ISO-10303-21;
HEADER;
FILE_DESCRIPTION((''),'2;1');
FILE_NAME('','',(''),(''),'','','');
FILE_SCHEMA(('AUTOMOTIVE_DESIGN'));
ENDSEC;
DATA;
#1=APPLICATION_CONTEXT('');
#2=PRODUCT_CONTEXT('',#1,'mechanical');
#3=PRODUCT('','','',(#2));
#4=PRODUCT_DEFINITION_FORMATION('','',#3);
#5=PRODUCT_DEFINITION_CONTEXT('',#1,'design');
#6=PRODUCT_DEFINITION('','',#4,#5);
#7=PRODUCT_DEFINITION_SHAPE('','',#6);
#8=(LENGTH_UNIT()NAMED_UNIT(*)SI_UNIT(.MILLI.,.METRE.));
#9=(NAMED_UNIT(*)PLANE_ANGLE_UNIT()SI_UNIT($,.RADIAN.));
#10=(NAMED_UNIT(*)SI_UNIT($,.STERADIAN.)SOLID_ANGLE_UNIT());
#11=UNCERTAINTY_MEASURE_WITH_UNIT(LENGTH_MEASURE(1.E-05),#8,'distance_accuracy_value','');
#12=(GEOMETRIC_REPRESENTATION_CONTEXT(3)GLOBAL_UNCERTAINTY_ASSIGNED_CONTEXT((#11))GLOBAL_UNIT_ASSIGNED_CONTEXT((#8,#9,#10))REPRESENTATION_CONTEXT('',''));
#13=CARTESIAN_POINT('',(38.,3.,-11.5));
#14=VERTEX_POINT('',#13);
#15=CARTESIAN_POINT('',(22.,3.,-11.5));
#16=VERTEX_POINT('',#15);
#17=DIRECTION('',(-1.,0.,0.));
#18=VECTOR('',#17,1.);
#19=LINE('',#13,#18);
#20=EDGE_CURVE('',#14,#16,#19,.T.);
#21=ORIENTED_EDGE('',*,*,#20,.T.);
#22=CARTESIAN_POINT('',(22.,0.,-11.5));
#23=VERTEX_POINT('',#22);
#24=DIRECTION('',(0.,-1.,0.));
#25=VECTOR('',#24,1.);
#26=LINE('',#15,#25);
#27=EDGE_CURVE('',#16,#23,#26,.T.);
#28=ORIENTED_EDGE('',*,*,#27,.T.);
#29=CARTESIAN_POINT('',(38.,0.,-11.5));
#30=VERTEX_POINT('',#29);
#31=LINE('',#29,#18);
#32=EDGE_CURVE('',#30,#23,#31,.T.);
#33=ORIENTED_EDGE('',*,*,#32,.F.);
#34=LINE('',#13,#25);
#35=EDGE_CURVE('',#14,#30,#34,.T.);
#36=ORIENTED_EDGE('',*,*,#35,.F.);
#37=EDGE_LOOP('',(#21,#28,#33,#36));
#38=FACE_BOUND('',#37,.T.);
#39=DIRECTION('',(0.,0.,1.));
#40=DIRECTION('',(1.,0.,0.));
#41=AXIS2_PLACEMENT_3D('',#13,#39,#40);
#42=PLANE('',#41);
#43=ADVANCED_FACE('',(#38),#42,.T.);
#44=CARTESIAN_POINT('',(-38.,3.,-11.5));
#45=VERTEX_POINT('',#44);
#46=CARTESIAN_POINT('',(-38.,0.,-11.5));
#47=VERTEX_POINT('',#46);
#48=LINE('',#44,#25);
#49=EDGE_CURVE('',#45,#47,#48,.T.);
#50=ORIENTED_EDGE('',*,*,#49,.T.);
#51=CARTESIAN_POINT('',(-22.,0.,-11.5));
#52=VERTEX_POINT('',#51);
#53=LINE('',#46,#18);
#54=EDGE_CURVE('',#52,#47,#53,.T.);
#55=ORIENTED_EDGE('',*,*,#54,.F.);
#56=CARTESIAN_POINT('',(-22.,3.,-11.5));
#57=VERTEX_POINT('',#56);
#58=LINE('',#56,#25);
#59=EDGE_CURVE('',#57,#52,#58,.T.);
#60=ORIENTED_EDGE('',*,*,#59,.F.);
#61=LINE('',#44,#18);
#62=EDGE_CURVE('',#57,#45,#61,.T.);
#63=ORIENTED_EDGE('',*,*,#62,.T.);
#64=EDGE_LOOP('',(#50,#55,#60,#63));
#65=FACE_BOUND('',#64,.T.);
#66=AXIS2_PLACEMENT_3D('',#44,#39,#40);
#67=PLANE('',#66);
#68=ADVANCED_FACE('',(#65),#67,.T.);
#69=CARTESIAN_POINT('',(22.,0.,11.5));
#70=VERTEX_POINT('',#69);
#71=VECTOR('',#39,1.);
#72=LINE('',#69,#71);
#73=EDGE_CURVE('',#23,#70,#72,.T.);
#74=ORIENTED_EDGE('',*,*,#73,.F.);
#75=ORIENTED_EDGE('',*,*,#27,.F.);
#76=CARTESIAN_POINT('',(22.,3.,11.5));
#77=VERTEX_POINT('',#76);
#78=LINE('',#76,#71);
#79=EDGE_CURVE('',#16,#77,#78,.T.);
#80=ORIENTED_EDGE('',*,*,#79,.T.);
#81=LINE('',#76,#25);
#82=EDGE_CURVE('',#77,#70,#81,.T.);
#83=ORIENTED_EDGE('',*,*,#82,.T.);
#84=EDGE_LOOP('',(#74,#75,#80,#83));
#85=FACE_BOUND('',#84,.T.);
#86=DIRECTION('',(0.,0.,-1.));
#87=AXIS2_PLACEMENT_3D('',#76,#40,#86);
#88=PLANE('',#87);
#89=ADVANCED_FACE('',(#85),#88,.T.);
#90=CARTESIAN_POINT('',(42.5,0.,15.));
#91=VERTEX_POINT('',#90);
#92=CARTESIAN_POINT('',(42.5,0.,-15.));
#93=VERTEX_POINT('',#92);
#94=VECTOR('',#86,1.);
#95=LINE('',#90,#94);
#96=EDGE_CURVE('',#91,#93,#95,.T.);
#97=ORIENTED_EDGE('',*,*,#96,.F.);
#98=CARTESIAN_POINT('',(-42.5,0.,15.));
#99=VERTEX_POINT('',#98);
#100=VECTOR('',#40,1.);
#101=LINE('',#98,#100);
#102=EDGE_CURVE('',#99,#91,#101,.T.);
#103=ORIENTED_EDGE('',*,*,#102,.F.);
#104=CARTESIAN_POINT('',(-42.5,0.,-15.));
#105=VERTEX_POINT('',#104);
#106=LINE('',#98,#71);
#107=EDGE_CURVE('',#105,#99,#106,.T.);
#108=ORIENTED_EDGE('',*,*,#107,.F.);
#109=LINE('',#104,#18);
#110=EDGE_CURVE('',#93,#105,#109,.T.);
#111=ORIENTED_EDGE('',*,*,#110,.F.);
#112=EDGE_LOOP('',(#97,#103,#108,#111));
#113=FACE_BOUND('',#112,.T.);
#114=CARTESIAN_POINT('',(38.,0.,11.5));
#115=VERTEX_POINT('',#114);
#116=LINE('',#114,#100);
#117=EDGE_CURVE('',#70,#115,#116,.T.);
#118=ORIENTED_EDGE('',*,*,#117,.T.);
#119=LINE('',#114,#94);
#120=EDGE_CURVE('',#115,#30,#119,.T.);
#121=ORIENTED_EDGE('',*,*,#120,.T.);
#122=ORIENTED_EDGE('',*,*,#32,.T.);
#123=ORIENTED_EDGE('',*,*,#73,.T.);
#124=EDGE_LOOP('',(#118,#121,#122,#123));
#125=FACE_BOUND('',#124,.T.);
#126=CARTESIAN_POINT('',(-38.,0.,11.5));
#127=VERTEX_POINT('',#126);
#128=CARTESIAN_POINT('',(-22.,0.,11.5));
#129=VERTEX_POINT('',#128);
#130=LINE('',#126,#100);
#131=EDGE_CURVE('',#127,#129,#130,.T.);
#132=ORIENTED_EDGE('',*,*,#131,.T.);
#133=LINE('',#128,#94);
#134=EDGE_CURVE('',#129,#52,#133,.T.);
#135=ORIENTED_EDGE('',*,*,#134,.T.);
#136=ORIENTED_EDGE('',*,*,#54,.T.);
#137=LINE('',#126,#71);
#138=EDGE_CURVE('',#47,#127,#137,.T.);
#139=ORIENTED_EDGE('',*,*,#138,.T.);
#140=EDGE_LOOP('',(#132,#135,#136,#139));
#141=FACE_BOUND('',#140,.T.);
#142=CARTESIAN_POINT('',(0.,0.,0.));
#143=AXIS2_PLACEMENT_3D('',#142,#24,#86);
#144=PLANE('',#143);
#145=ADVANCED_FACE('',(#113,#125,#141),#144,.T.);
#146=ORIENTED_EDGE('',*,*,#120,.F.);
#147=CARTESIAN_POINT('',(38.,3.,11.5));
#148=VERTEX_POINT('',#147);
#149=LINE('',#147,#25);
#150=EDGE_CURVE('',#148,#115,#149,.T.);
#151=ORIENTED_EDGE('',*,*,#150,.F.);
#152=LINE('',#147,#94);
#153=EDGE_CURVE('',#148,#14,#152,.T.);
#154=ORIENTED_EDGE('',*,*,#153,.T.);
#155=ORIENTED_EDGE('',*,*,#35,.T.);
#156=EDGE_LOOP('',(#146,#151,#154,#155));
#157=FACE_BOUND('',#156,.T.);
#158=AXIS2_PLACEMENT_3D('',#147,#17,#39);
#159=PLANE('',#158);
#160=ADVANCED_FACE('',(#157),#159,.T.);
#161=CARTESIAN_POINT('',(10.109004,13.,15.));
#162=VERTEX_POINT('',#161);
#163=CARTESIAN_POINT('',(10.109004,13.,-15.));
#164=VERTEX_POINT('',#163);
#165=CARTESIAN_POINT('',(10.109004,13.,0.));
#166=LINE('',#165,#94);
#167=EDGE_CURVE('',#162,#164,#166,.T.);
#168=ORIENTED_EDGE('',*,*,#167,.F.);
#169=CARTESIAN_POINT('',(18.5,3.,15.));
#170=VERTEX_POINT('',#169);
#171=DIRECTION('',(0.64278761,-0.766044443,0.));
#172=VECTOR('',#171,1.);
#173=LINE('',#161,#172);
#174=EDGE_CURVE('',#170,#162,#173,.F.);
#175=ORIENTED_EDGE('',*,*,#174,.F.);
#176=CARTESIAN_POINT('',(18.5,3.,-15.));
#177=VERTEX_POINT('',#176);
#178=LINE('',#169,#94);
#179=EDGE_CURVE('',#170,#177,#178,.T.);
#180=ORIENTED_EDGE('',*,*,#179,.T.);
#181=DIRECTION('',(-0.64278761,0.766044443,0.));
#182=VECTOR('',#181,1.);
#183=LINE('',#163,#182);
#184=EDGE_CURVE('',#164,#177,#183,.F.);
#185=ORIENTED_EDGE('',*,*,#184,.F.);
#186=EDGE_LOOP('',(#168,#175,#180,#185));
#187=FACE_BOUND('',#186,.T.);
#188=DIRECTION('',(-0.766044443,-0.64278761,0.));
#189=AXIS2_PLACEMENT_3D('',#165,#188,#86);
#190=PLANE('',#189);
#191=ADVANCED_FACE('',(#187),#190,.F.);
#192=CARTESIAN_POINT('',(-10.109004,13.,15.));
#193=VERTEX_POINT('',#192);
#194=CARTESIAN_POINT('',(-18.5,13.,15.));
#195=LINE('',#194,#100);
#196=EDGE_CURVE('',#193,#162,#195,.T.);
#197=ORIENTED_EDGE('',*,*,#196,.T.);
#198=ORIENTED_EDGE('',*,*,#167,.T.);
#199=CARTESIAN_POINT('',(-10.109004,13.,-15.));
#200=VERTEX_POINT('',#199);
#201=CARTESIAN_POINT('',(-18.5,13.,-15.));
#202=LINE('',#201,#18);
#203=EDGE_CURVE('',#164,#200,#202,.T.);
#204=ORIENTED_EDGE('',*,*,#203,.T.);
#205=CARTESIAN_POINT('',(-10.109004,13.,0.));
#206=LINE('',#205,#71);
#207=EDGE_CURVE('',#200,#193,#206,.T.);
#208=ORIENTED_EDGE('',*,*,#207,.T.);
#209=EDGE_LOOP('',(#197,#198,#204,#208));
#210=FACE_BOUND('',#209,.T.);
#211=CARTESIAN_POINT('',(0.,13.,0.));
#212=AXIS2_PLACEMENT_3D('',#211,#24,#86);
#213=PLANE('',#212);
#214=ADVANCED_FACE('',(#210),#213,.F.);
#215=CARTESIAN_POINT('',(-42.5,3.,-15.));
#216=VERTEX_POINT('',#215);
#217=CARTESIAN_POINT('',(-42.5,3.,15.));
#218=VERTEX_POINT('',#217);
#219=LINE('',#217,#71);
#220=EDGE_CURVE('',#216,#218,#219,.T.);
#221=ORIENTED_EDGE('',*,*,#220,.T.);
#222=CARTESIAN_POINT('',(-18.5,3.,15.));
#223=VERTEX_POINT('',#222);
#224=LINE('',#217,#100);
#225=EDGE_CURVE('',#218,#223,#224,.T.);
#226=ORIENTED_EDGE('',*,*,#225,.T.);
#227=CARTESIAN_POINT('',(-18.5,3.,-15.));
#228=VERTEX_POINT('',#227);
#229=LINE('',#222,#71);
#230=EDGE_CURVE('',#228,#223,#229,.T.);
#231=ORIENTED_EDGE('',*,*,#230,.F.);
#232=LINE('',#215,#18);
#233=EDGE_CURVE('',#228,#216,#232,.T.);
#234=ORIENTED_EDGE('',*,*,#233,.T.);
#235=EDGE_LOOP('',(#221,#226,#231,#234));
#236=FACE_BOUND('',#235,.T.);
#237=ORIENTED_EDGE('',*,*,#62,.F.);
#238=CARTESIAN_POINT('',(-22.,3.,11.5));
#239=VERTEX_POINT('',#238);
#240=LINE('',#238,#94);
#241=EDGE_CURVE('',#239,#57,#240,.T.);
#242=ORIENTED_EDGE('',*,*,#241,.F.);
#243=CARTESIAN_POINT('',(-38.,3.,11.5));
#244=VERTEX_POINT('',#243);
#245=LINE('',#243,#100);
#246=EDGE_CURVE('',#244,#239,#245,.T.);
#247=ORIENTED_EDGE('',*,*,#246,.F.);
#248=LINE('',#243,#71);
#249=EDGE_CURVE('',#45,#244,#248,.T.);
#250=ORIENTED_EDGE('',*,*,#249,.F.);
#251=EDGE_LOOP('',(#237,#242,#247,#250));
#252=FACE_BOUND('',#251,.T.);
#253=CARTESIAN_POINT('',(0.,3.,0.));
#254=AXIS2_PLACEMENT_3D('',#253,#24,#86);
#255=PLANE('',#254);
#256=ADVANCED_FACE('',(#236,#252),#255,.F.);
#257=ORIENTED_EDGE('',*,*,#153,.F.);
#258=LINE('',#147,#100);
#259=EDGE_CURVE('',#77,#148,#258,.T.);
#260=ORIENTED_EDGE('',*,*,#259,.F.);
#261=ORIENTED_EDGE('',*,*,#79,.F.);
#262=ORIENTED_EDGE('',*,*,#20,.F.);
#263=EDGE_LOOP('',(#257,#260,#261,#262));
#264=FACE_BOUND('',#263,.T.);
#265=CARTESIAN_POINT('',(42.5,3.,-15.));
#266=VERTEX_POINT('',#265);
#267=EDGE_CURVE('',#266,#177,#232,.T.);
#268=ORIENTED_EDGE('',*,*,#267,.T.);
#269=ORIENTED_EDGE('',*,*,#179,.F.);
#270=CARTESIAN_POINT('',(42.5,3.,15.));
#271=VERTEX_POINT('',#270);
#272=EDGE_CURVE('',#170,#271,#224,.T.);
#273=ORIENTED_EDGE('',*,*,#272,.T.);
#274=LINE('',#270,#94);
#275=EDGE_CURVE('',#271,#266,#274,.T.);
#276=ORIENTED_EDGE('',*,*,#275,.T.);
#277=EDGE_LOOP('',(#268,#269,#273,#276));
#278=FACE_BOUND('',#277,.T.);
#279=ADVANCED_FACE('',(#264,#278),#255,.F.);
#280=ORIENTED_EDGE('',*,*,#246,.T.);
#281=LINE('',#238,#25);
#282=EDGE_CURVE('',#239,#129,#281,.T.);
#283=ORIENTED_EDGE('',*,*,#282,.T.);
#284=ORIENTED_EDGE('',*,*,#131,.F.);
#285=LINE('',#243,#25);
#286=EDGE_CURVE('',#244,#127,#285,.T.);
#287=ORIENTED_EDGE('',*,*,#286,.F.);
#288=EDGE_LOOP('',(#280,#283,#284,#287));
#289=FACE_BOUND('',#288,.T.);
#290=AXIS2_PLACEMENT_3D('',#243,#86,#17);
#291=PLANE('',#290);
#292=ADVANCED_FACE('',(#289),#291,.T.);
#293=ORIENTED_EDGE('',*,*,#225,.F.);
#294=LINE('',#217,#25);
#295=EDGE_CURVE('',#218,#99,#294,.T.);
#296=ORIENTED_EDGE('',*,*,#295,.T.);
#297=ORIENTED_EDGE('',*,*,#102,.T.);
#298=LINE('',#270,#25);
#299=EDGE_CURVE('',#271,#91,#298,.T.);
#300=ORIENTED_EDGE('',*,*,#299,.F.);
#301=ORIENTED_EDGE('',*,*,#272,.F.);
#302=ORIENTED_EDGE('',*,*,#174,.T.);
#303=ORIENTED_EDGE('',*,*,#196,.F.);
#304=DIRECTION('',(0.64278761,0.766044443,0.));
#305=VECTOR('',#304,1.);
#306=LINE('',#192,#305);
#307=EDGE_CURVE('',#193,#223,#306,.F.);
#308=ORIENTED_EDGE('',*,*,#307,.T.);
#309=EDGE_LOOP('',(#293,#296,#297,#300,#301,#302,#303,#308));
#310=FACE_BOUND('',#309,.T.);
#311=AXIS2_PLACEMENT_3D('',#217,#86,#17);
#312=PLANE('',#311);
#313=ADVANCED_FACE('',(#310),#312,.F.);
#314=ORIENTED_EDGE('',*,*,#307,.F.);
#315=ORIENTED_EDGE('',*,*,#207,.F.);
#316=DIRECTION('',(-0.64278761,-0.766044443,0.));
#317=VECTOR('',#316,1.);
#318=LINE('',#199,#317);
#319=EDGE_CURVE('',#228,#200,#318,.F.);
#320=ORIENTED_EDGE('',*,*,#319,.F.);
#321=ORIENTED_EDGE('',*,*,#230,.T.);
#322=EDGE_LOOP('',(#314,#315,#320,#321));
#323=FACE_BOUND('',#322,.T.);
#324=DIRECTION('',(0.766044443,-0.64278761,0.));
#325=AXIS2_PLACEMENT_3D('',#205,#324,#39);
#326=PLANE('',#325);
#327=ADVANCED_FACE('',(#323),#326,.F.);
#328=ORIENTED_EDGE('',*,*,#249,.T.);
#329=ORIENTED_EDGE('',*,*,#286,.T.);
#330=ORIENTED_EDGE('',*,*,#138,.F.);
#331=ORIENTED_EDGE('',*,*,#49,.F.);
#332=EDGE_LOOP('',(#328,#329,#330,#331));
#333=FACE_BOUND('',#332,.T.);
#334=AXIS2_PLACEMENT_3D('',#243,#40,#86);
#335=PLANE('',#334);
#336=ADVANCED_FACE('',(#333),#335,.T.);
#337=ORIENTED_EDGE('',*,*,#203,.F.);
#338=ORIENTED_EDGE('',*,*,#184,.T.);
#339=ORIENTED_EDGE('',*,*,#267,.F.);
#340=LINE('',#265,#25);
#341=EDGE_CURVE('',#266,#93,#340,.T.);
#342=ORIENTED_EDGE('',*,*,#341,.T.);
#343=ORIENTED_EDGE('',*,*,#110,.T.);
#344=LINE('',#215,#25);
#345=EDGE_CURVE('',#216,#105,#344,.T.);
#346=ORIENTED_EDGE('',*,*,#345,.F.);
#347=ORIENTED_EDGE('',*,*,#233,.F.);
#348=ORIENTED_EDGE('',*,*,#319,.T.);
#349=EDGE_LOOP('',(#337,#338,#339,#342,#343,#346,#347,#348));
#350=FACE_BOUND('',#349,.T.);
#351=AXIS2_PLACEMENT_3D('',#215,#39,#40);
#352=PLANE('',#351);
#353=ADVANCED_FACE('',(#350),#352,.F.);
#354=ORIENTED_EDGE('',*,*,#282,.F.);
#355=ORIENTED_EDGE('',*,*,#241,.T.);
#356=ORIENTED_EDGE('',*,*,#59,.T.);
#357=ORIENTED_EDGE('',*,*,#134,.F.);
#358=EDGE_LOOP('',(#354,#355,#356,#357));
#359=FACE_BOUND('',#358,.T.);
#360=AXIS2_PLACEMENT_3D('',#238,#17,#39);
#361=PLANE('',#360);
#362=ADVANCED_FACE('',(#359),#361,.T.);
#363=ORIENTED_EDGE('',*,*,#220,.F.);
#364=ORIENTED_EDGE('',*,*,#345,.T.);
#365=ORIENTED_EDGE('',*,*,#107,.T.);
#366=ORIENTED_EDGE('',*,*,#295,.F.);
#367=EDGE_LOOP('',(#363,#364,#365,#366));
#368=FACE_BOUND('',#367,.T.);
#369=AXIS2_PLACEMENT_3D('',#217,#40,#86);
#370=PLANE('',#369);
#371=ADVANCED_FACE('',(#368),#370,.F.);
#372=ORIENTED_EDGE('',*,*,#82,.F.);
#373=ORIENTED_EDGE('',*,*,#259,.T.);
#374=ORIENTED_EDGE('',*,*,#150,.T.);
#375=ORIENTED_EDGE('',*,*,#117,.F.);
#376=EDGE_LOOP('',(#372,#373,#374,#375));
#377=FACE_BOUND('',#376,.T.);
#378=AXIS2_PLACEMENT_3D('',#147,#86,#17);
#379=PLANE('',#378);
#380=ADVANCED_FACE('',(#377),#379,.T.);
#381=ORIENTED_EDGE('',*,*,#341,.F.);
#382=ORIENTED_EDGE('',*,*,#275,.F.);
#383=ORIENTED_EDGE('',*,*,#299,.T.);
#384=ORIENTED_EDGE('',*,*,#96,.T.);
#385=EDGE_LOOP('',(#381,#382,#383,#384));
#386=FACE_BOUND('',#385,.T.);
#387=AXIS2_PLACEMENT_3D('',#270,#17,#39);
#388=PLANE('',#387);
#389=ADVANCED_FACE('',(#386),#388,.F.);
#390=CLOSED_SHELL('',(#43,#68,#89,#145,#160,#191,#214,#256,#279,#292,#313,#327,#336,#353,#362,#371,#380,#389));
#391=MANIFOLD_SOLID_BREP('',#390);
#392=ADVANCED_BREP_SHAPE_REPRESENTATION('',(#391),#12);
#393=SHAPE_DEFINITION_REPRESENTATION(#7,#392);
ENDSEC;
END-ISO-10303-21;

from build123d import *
from OCP.BRepFilletAPI import BRepFilletAPI_MakeChamfer

# Parameters (mm, degrees)
CROQUIS1_W              = 85
CROQUIS1_H              = 30
CROQUIS1_W_2            = 16
CROQUIS1_H_2            = 23
SALIENTE_EXTRUIR1_DEPTH = 3
CROQUIS3_W              = 37
CROQUIS3_H              = 30
SALIENTE_EXTRUIR2_DEPTH = 10
CHAFL_N1_SIZE           = 10
CHAFL_N1_SIZE_2         = 8.390996312


with BuildPart() as part:
    # Croquis1 → Saliente-Extruir1 (new body)
    with BuildSketch(Plane(origin=(0, 0, 0), x_dir=(1, 0, 0), z_dir=(0, 1, 0))):
        Rectangle(CROQUIS1_W, CROQUIS1_H)
        with Locations((30, 0)):
            Rectangle(CROQUIS1_W_2, CROQUIS1_H_2, mode=Mode.SUBTRACT)
        with Locations((-30, 0)):
            Rectangle(CROQUIS1_W_2, CROQUIS1_H_2, mode=Mode.SUBTRACT)
    extrude(amount=SALIENTE_EXTRUIR1_DEPTH)

    # Croquis3 → Saliente-Extruir2 (add)
    with BuildSketch(Plane(origin=(0, 3, 0), x_dir=(1, 0, 0), z_dir=(0, 1, 0))):
        Rectangle(CROQUIS3_W, CROQUIS3_H)
    extrude(amount=SALIENTE_EXTRUIR2_DEPTH)

    # Chaflán1
    chafl_n1_edges_1 = [part.edges().sort_by_distance(p)[0] for p in [
        (18.5, 13, 0),
    ]]
    chafl_n1_side_1 = [part.faces().sort_by_distance(p)[0] for p in [
        (18.5, 12.832180074, 0),
    ]]
    chafl_n1_edges_2 = [part.edges().sort_by_distance(p)[0] for p in [
        (-18.5, 13, 0),
    ]]
    chafl_n1_side_2 = [part.faces().sort_by_distance(p)[0] for p in [
        (-18.5, 12.832180074, 0),
    ]]
    chafl_n1 = BRepFilletAPI_MakeChamfer(part.part.solid().wrapped)
    for e in chafl_n1_edges_1:
        chafl_n1.Add(CHAFL_N1_SIZE - 0.0001, CHAFL_N1_SIZE_2 - 0.0001, e.wrapped, chafl_n1_side_1[0].wrapped)
    for e in chafl_n1_edges_2:
        chafl_n1.Add(CHAFL_N1_SIZE - 0.0001, CHAFL_N1_SIZE_2 - 0.0001, e.wrapped, chafl_n1_side_2[0].wrapped)
    add(Compound.cast(chafl_n1.Shape()), mode=Mode.REPLACE)  # a hair under: the kernel refuses the full size


solid = part.part
